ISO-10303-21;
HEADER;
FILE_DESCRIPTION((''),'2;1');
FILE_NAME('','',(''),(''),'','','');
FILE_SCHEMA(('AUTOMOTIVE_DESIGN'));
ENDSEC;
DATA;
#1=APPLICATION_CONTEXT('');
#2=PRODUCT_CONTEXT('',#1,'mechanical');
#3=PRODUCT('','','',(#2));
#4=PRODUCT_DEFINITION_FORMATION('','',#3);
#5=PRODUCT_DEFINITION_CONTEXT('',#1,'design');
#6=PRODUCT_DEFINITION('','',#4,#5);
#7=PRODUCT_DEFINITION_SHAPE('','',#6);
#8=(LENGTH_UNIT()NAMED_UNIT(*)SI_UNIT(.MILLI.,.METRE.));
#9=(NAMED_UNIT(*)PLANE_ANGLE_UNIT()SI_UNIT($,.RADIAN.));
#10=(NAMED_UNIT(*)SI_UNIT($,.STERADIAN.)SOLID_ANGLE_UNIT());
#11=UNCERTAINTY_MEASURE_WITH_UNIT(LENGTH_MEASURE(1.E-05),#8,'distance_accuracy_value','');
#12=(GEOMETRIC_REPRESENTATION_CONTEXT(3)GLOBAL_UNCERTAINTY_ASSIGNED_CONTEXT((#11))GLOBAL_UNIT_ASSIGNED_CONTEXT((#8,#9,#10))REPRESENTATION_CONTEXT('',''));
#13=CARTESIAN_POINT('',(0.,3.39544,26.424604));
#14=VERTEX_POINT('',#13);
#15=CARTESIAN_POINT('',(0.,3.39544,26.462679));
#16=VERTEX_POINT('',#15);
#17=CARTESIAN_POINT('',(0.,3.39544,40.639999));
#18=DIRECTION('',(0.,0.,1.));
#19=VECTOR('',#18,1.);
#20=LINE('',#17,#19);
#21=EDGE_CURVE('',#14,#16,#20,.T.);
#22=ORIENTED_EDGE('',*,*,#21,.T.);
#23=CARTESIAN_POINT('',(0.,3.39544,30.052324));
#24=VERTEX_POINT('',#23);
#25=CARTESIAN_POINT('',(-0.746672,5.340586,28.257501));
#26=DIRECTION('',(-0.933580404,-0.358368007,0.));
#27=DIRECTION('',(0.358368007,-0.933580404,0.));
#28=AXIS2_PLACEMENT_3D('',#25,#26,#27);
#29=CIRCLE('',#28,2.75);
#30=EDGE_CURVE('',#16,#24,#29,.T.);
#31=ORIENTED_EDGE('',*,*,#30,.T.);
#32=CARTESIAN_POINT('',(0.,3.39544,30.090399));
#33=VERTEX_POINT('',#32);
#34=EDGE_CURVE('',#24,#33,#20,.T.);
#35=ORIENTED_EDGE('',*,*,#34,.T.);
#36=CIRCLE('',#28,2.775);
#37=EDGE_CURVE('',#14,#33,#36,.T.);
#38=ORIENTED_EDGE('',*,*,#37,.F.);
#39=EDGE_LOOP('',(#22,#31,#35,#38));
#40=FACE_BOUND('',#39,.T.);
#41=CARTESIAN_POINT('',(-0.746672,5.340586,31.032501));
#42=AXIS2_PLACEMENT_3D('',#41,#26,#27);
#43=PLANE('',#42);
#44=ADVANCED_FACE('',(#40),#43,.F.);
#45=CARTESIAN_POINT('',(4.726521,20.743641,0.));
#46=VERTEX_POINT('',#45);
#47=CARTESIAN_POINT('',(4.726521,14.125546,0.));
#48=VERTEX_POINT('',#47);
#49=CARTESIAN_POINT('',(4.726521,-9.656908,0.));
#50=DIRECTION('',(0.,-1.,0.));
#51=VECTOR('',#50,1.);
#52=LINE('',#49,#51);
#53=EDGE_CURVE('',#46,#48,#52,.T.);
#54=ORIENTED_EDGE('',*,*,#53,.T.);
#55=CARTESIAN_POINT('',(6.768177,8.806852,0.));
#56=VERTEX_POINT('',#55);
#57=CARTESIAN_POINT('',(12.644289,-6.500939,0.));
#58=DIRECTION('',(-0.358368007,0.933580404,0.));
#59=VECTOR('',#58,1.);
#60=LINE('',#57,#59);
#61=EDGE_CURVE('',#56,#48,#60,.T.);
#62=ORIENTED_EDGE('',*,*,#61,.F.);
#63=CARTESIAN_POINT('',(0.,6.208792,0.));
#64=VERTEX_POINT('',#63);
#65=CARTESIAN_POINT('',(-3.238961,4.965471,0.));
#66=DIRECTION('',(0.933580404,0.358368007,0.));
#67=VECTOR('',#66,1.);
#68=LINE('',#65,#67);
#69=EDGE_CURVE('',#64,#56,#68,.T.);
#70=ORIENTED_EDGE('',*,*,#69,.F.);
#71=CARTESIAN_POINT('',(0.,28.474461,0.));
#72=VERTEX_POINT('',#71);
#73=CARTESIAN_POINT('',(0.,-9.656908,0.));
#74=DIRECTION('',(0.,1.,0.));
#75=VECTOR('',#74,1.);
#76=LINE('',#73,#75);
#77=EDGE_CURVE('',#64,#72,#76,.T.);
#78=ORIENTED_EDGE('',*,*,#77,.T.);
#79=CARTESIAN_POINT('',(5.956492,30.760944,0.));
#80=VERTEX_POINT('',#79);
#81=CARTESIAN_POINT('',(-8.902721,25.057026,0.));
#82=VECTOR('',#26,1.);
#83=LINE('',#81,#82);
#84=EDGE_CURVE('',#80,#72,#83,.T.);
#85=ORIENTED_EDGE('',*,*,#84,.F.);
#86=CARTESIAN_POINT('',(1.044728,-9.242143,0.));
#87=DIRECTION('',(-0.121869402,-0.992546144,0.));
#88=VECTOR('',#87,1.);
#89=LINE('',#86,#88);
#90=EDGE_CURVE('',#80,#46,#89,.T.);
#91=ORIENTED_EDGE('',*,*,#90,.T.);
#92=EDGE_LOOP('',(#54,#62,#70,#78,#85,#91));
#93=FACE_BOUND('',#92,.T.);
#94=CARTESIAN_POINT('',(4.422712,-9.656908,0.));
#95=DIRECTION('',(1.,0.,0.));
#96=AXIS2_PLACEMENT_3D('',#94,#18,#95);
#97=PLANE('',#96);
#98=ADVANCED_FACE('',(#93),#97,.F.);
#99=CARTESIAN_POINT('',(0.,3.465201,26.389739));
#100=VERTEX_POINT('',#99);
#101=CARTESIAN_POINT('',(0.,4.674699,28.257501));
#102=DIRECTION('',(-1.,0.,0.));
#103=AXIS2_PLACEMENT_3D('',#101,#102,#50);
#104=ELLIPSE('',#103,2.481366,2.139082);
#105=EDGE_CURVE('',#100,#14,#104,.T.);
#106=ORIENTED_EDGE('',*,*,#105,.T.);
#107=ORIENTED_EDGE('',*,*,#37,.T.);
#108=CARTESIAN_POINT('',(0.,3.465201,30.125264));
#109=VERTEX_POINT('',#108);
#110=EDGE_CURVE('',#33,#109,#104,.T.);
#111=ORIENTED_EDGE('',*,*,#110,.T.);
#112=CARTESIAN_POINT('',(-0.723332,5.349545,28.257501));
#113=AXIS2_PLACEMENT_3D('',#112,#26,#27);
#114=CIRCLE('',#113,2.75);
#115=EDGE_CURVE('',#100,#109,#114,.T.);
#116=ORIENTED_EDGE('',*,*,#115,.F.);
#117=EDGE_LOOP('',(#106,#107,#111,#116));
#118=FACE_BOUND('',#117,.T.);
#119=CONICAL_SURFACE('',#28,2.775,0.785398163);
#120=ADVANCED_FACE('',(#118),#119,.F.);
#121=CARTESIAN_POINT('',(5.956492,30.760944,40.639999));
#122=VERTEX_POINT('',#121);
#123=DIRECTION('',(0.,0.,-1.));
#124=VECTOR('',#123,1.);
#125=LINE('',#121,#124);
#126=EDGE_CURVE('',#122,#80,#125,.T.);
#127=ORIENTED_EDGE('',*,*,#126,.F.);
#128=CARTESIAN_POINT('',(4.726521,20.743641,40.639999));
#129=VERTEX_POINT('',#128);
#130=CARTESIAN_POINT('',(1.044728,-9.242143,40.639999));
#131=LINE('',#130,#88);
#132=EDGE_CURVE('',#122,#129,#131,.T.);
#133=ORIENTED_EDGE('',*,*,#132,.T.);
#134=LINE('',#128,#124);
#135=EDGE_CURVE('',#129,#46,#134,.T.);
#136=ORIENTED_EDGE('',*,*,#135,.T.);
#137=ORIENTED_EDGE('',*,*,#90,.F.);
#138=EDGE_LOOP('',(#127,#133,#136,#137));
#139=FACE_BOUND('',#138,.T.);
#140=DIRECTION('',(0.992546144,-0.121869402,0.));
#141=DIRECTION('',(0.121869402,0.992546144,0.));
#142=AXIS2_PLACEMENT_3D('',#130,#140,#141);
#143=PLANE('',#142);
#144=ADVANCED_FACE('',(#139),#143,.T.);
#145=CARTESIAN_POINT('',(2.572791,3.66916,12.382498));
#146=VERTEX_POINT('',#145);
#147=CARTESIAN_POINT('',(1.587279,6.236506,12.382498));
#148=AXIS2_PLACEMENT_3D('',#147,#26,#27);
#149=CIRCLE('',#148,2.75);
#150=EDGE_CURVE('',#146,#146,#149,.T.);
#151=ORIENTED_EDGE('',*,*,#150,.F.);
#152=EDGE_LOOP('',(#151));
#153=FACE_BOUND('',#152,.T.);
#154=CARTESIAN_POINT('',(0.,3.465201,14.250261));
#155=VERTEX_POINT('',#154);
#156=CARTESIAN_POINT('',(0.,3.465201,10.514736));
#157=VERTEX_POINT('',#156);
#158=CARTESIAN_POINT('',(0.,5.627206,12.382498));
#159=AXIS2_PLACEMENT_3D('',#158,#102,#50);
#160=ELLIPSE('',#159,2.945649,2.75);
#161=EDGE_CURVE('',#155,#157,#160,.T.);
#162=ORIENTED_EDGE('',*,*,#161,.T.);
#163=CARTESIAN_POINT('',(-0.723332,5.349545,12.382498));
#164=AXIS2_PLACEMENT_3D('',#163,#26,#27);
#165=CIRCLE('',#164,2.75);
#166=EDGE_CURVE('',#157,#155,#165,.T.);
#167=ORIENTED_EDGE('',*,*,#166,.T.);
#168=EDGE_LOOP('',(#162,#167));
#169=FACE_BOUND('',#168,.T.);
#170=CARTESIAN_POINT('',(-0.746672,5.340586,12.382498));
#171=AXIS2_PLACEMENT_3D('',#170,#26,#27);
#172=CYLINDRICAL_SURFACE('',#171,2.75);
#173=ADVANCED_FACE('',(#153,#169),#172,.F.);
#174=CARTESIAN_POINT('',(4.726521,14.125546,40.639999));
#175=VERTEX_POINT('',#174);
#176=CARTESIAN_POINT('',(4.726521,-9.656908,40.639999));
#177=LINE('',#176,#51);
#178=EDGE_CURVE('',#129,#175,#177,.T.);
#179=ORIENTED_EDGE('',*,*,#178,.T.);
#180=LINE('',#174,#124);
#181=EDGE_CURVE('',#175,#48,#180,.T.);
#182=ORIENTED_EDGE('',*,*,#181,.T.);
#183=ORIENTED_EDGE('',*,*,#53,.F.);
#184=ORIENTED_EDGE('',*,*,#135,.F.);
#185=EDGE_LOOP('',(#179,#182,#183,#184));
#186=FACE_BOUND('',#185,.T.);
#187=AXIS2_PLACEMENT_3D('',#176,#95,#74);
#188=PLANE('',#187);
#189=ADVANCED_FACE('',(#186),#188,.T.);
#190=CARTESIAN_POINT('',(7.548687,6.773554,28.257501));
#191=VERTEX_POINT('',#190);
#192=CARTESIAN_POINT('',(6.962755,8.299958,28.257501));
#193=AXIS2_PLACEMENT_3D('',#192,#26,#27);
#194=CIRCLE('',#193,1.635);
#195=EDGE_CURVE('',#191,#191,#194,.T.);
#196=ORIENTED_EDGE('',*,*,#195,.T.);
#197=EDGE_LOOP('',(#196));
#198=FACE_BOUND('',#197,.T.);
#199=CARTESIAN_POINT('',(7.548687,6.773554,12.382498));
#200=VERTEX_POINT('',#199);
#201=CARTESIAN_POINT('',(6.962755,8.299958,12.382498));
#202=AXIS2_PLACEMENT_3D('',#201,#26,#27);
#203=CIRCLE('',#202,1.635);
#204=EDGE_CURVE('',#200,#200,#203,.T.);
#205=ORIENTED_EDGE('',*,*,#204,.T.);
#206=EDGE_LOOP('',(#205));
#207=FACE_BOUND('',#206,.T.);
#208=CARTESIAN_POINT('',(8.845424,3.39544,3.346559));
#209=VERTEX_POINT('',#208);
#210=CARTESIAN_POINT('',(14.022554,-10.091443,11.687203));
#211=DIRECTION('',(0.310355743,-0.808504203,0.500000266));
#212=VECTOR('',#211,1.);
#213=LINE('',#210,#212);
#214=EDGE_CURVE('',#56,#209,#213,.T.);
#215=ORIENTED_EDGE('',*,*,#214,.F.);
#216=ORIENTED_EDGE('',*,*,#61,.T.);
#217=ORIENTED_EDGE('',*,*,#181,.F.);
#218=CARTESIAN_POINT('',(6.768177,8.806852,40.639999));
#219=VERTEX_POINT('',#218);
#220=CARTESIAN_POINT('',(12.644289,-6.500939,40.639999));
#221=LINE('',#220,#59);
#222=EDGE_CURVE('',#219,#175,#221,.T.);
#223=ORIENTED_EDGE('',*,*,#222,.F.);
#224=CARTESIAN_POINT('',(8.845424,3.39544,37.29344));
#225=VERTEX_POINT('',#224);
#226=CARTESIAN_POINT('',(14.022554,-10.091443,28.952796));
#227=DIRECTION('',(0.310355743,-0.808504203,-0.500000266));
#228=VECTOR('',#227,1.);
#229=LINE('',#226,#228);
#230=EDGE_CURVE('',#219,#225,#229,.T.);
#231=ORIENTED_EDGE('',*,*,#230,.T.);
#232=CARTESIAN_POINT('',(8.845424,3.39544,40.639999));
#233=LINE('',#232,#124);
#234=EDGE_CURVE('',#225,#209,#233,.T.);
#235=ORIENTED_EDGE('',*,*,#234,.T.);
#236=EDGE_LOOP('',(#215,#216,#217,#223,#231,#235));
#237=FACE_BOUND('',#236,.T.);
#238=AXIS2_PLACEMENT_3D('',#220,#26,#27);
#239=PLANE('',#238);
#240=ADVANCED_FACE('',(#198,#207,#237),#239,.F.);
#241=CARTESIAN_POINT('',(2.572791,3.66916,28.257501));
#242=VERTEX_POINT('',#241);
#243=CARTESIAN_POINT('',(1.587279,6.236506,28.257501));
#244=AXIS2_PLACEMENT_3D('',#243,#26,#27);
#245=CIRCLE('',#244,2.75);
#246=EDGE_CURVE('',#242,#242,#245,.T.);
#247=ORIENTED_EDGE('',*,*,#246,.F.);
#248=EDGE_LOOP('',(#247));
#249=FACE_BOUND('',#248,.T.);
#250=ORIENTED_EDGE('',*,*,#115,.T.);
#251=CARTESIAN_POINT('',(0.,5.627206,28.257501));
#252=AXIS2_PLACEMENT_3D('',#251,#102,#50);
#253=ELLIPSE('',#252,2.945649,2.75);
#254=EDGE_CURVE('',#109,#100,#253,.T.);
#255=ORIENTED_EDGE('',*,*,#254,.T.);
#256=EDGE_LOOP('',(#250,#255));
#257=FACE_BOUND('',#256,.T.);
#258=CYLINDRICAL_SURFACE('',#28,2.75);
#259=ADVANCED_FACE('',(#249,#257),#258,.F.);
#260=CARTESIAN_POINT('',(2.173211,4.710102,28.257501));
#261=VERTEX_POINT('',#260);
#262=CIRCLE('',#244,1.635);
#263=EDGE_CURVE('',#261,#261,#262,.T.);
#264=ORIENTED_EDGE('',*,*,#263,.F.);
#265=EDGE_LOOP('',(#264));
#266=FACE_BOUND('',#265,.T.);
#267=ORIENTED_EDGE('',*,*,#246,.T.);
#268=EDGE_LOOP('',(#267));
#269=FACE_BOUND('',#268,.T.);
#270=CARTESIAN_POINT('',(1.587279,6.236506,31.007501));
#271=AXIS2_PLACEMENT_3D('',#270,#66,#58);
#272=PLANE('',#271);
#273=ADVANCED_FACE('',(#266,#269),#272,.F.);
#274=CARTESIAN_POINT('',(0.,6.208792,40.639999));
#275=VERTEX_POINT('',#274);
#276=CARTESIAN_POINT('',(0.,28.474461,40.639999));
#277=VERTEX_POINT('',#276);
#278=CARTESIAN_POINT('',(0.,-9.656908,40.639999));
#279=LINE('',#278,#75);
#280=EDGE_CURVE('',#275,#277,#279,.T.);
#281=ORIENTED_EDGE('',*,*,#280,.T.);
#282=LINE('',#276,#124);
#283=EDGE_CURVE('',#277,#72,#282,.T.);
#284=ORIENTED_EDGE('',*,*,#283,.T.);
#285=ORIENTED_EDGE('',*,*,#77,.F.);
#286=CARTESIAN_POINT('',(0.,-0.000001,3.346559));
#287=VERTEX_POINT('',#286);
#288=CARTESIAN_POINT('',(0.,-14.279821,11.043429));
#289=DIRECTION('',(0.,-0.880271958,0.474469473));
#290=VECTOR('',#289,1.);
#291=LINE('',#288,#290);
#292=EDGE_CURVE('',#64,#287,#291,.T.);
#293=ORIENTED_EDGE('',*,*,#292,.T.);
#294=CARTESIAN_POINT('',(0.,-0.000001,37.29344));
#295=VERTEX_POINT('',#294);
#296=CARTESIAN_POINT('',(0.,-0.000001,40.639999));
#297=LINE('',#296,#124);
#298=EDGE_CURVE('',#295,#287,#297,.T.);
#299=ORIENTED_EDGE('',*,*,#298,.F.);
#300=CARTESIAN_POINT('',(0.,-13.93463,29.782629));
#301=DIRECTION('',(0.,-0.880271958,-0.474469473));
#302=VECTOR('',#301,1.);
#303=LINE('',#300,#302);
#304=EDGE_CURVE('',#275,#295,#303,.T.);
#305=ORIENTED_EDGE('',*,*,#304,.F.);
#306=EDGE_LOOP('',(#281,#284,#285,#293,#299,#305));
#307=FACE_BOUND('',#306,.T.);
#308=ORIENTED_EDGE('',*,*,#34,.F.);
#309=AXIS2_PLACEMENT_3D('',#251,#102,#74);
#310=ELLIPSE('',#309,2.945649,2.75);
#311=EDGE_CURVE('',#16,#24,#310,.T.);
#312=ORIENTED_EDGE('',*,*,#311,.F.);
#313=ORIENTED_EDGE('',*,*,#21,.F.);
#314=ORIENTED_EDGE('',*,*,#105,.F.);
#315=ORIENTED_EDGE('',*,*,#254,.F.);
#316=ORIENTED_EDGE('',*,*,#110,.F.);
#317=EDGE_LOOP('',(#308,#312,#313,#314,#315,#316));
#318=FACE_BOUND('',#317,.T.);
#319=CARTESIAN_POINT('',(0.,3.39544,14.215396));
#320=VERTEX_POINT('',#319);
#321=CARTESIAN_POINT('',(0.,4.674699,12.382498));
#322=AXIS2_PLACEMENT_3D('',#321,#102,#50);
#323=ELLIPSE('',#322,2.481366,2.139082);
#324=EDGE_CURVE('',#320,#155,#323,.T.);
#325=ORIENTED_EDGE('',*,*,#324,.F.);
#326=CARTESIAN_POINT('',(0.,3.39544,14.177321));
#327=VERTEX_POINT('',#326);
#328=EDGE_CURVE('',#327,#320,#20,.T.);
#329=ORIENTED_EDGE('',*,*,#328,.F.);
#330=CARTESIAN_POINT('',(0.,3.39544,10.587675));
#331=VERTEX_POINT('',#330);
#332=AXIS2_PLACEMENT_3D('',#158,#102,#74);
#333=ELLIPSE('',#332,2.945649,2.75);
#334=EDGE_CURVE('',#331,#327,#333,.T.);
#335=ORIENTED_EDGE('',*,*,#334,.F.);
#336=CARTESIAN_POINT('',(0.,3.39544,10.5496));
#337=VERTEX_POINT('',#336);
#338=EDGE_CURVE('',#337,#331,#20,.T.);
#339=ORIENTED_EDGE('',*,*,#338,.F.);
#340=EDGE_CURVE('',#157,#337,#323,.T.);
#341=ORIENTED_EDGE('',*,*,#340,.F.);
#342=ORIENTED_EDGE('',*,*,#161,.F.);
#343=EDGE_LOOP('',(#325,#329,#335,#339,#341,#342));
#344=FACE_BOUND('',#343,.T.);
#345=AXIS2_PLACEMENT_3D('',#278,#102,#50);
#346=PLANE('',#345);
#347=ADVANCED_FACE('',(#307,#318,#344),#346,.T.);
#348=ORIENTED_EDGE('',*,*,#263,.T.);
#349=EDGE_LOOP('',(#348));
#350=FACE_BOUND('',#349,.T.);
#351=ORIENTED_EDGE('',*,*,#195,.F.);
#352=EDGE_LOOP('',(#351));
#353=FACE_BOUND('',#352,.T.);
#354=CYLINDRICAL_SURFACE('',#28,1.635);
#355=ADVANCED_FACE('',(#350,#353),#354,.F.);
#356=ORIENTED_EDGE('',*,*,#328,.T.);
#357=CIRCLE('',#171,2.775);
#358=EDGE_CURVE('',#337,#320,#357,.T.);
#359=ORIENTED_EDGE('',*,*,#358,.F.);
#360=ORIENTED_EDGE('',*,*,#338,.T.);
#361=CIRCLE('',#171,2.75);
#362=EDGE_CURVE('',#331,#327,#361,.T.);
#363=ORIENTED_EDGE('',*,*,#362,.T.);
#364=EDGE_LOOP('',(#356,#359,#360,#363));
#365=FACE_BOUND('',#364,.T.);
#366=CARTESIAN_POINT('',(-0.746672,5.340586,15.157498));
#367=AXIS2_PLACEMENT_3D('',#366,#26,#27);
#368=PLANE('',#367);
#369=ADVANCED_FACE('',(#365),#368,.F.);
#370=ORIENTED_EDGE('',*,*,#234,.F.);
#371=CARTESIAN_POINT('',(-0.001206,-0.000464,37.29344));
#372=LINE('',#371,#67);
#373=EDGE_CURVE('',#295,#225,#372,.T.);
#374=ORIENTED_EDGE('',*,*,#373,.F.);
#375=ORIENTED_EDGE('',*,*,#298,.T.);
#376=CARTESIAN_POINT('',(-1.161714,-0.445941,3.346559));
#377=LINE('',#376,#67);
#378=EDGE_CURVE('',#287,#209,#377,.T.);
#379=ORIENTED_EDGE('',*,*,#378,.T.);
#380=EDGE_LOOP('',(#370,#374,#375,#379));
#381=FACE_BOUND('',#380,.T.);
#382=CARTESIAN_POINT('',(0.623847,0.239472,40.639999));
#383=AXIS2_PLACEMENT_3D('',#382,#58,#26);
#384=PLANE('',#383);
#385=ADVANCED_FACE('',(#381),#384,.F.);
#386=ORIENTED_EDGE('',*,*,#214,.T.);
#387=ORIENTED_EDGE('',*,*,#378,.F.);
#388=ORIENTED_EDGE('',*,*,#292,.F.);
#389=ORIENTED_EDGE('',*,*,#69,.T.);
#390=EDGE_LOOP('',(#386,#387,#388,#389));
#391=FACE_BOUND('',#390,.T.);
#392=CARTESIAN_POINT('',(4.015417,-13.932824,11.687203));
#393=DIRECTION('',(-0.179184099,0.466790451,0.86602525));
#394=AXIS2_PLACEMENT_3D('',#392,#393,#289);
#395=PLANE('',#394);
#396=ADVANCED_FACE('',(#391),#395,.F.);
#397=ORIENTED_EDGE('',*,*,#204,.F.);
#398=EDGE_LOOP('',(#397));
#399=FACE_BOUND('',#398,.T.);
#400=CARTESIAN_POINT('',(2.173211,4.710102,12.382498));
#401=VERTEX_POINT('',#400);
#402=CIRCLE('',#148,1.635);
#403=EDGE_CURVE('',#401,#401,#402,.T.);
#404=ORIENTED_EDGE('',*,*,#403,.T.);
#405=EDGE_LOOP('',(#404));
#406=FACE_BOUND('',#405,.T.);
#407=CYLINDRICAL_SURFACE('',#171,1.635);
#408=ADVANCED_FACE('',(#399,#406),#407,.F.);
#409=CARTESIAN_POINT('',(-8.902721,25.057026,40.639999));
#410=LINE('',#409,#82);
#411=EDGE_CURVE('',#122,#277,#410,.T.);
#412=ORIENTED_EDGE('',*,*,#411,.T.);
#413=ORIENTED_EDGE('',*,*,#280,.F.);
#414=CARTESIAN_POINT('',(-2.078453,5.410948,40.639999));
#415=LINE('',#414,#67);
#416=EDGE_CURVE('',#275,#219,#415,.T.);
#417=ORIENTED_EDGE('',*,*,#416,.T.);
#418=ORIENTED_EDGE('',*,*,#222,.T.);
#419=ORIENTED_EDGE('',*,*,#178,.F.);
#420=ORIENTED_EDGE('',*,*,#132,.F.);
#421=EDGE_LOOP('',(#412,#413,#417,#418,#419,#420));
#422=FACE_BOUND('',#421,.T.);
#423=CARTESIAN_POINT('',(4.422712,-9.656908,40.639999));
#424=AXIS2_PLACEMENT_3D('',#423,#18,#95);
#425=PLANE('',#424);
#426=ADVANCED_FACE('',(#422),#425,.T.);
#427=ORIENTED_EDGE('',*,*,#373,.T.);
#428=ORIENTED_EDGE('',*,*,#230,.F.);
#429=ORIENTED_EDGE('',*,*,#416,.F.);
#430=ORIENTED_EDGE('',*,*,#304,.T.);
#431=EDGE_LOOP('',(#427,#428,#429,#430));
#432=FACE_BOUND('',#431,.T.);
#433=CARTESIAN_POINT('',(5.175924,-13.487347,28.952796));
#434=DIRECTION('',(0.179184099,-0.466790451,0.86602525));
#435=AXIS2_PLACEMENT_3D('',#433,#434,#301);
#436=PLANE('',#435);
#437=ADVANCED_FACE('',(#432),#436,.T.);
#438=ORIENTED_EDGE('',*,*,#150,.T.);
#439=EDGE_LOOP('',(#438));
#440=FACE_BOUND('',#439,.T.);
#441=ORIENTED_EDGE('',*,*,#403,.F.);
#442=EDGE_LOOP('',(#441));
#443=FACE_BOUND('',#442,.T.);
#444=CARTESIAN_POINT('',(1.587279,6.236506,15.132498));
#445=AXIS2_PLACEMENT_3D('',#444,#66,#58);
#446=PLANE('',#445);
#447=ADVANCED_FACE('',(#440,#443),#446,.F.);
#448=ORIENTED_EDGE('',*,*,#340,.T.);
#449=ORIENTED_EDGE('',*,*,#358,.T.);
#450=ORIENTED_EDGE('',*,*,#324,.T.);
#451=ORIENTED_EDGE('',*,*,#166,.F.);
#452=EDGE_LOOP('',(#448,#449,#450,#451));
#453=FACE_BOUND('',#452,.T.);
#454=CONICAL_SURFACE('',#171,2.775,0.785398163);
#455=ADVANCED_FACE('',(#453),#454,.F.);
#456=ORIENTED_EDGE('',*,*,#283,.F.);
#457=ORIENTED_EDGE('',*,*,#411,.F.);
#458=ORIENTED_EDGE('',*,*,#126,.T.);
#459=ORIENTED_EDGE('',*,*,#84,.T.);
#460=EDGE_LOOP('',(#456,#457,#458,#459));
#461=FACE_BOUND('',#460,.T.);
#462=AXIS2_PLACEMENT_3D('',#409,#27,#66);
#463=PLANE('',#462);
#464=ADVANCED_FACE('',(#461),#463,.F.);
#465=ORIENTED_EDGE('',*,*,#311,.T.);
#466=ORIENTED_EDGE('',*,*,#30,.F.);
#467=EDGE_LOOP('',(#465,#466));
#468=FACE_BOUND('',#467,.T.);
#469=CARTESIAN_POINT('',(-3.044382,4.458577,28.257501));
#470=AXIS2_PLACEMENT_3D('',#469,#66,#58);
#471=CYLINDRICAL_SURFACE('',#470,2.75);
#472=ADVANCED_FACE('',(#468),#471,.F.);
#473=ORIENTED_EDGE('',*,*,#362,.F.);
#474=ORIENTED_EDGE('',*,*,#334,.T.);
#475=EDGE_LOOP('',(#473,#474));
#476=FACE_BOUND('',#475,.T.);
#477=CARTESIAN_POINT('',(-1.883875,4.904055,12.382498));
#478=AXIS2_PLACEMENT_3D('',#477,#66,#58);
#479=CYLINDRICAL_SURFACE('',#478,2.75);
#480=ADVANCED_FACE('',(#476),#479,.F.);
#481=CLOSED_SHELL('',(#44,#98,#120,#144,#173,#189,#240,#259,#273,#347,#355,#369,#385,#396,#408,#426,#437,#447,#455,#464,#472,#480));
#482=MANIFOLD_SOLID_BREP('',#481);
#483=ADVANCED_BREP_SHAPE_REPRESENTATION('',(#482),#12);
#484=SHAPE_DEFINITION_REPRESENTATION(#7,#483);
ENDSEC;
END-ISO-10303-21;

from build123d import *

# Parameters (mm, degrees)
EXTRUDE_1020_DEPTH     = 40.639999
CUT_EXTRUDE_START      = -9.474731536
CUT_EXTRUDE_1457_DEPTH = 9.474731536
SKETCH_5_6_R           = 1.631950308
EXTRUDE_1503_DEPTH     = 8.257914
CUT_EXTRUDE_2395_REACH = 52.464
SKETCH_11_R            = 2.75
CUT_EXTRUDE_2_REACH    = 52.464
SKETCH_18_R            = 2.75


# Read off the part's stored shape, not the designer's step: 切割边缘
with BuildPart() as part:
    # Sketch 255 → Extrude 1020 (new body)
    with BuildSketch(Plane.XY):
        Polygon((4.726521015, 20.743641369), (4.726521015, 19.19011116), (4.726521015, 14.125546455), (8.845423698, 3.395440102), (0, -5.59e-07), (0, 28.474460602), (5.956491721, 30.760943971), (5.827697754, 29.712001801), (4.915848732, 22.285591125), align=None)
    extrude(amount=EXTRUDE_1020_DEPTH)

    # Cut-Extrude 1457 outline → Cut-Extrude 1457 (cut)
    with BuildSketch(Plane(origin=(8.845423511, 3.395440589, 0), x_dir=(0, 0, -1), z_dir=(0.9335804043176853, 0.35836800732491086, 0)).offset(CUT_EXTRUDE_START)):
        Polygon((-37.293439923, -5.22e-07), (-40.63999939, 5.796406388), (-40.63999939, -5.22e-07), align=None)
    cut_extrude_1457 = extrude(amount=CUT_EXTRUDE_1457_DEPTH, mode=Mode.SUBTRACT)

    # 草图5<6> → Extrude 1503 (add)
    with BuildSketch(Plane(origin=(8.845423511, 3.395440589, 0), x_dir=(0, 0, -1), z_dir=(0.9335804043176853, 0.35836800732491086, 0))):
        with Locations(Location((-28.25750129, 5.25344969, 0), (0, 0, 90))):
            Circle(SKETCH_5_6_R)
    extrude_1503 = extrude(amount=-EXTRUDE_1503_DEPTH)

    # 镜向6: Cut-Extrude 1457, Extrude 1503 across plane
    add(cut_extrude_1457.mirror(Plane.XY.offset(20.319999695)), mode=Mode.SUBTRACT)
    add(extrude_1503.mirror(Plane.XY.offset(20.319999695)))

    # 草图10 → M2.5 凹头盖螺钉的柱形沉头孔2 (revolve, cut)
    with BuildSketch(Plane(origin=(-0.746671694, 5.340586006, 28.25750129), x_dir=(0.3583680073249109, -0.9335804043176852, 0), z_dir=(0, 0, 1))):
        Polygon((0, 0), (0, 18.064835324), (1.635, 18.064835324), (1.635, 2.5), (2.75, 2.5), (2.75, 0.025), (2.775, 0), align=None)
    revolve(axis=Axis((-6.674907261, 3.06494916, 28.25750129), (0.9335804043176852, 0.358368007324911, 0)), mode=Mode.SUBTRACT)

    # 草图11 → Cut-Extrude 2395 (cut, up to next)
    with BuildSketch(Plane(origin=(3.469947614, 1.331988339, 0), x_dir=(0, 0, 1), z_dir=(-0.9335804043176853, -0.3583680073249109, 0)), mode=Mode.PRIVATE) as cut_extrude_2395_sk1:
        with Locations(Location((28.25750129, 5.25344969, 0), (0, 0, 270))):
            Circle(SKETCH_11_R)
    cut_extrude_2395_tool1 = extrude(cut_extrude_2395_sk1.sketch, amount=CUT_EXTRUDE_2395_REACH, mode=Mode.PRIVATE) & part.part
    add(cut_extrude_2395_tool1.solids().sort_by_distance((1.587279, 6.236506, 28.257501))[0], mode=Mode.SUBTRACT)

    # 草图17 → M2.5 凹头盖螺钉的柱形沉头孔5 (revolve, cut)
    with BuildSketch(Plane(origin=(-0.746671694, 5.340586006, 12.3824981), x_dir=(0.3583680073249109, -0.9335804043176852, 0), z_dir=(0, 0, 1))):
        Polygon((0, 0), (0, 18.064835324), (1.635, 18.064835324), (1.635, 2.5), (2.75, 2.5), (2.75, 0.025), (2.775, 0), align=None)
    revolve(axis=Axis((-6.674907261, 3.06494916, 12.3824981), (0.9335804043176852, 0.358368007324911, 0)), mode=Mode.SUBTRACT)

    # 草图18 → 修整螺丝2 (cut, up to next)
    with BuildSketch(Plane(origin=(3.469947614, 1.331988339, 0), x_dir=(0, 0, 1), z_dir=(-0.9335804043176853, -0.3583680073249109, 0)), mode=Mode.PRIVATE) as cut_extrude_2_sk1:
        with Locations(Location((12.3824981, 5.25344969, 0), (0, 0, 270))):
            Circle(SKETCH_18_R)
    cut_extrude_2_tool1 = extrude(cut_extrude_2_sk1.sketch, amount=CUT_EXTRUDE_2_REACH, mode=Mode.PRIVATE) & part.part
    add(cut_extrude_2_tool1.solids().sort_by_distance((1.587279, 6.236506, 12.382498))[0], mode=Mode.SUBTRACT)


solid = part.part
